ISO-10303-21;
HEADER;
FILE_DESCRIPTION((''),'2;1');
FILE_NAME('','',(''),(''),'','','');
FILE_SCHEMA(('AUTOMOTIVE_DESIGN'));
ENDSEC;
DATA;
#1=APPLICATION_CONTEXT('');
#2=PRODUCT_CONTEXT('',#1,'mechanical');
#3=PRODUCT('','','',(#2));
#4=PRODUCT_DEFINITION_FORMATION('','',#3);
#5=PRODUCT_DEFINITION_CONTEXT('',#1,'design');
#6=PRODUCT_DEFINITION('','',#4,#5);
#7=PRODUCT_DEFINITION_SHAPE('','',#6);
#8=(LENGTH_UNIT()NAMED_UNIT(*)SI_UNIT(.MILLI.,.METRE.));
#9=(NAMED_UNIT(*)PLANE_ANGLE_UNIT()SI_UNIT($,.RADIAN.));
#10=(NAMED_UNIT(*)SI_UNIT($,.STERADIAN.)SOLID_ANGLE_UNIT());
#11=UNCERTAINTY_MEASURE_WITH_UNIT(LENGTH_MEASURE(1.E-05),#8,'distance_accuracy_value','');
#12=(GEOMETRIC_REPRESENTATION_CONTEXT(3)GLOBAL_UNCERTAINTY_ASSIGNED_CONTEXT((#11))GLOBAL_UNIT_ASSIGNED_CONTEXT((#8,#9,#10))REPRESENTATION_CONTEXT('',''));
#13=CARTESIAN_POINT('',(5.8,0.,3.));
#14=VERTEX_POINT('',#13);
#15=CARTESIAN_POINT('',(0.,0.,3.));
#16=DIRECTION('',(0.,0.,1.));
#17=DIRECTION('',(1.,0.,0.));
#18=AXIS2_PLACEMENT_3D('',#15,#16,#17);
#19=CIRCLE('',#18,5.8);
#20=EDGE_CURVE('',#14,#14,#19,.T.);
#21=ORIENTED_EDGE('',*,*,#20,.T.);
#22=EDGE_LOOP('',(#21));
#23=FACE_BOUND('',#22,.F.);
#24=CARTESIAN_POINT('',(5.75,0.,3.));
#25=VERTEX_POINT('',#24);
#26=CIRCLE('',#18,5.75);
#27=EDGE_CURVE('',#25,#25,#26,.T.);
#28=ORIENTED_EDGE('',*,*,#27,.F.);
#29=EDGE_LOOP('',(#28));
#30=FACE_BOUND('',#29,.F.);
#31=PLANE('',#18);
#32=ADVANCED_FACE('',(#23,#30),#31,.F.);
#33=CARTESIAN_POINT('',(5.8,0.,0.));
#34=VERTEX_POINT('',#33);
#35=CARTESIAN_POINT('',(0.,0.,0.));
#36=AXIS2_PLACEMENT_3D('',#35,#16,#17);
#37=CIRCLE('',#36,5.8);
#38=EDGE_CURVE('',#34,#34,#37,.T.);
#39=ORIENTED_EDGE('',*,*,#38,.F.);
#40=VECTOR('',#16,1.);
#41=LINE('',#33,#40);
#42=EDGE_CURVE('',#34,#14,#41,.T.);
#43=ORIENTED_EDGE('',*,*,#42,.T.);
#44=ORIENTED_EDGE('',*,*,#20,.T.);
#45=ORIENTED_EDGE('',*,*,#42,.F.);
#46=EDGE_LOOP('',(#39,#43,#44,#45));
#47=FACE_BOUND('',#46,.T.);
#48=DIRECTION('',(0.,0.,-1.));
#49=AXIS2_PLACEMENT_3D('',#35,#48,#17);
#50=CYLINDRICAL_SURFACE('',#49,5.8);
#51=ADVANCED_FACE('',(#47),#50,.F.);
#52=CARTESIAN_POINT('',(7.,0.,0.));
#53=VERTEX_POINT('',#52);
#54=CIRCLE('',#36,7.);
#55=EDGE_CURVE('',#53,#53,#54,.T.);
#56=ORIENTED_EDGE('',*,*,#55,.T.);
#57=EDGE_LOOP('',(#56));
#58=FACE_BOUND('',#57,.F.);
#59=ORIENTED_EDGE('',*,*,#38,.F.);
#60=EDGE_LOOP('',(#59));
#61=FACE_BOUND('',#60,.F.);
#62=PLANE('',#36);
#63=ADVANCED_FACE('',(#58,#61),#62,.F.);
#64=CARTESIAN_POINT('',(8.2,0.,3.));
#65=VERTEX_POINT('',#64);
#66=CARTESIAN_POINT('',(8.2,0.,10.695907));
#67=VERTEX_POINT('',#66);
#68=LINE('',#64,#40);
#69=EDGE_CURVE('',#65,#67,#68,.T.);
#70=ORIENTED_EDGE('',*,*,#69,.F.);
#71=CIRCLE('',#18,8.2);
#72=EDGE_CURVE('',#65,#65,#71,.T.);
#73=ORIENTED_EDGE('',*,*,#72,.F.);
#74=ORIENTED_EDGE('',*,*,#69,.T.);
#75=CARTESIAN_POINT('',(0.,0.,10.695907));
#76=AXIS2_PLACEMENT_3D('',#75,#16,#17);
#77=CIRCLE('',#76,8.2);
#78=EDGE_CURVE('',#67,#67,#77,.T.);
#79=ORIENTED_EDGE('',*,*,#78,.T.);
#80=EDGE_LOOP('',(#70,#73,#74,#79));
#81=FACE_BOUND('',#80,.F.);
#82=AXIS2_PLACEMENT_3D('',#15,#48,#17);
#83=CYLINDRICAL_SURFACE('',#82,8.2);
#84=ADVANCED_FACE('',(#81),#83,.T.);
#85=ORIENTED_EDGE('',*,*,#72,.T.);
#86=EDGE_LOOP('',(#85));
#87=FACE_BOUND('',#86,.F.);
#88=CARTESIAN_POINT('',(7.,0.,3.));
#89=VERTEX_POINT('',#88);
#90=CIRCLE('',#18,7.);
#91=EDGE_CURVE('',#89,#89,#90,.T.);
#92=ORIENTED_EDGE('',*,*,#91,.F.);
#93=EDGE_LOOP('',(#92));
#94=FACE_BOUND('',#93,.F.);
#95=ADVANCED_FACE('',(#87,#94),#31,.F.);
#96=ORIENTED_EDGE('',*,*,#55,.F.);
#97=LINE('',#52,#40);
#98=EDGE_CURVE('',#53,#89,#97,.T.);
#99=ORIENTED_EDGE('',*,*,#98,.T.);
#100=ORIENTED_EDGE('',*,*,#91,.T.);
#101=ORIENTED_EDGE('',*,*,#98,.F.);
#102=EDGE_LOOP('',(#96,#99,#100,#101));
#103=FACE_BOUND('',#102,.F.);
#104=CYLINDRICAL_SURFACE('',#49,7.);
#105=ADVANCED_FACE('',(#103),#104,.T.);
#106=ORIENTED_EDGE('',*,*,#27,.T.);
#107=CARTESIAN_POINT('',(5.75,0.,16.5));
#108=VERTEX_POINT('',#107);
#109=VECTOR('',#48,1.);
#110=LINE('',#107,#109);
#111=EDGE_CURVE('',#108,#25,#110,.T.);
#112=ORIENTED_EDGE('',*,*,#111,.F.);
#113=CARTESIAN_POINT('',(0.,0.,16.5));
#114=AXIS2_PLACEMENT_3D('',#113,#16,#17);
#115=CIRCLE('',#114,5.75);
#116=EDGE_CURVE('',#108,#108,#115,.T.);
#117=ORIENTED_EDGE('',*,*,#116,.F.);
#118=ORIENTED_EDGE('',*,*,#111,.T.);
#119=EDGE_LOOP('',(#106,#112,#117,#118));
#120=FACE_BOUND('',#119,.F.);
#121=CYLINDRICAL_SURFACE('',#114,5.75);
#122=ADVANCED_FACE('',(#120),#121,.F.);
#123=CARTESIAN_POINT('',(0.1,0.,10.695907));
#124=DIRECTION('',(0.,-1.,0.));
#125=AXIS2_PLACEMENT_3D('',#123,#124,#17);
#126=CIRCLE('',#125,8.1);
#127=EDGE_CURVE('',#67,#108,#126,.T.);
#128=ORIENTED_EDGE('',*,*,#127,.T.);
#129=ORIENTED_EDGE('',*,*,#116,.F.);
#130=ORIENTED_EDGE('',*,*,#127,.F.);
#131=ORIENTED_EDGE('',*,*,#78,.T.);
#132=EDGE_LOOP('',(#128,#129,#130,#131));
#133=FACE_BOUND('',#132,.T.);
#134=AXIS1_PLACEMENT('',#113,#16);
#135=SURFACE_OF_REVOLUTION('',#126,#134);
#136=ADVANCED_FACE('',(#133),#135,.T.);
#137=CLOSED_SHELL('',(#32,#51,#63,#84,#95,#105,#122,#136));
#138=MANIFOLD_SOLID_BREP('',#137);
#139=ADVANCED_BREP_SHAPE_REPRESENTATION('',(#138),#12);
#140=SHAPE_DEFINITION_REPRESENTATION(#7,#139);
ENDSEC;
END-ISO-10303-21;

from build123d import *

# Parameters (mm, degrees)
F0_R     = 7
F0_R_2   = 5.8
F1_DEPTH = 3
F2_R     = 8.2
F3_DEPTH = 13.5
F4_R     = 5.75
F5_DEPTH = 16.501


# Not quite as in the source:
# - a fillet or chamfer that OpenCascade refuses, or shapes differently, is made with other operations: its cross-section is extruded or revolved along the edge and cut away or added


with BuildPart() as f1:
    # F0 (on Top) → F1 (new body)
    with BuildSketch(Plane.XY):
        Circle(F0_R)
        Circle(F0_R_2, mode=Mode.SUBTRACT)
    extrude(amount=F1_DEPTH)

    # F2 (on face) → F3 (join)
    with BuildSketch(Plane.XY.offset(3)):
        Circle(F2_R)
    extrude(amount=F3_DEPTH)

    # F4 (on face) → F5 (cut, through all)
    with BuildSketch(Plane.XY.offset(16.5)):
        Circle(F4_R)
    extrude(amount=-F5_DEPTH, mode=Mode.SUBTRACT)

    # F6: fillet of radius 8.1 on 1 edges, made by hand

    # F6_s1 → F6_t2 (revolve, cut)
    with BuildSketch(Plane.XZ):
        with BuildLine():
            ThreePointArc((8.2, 10.6959066169), (7.5624057783, 13.8459066169), (5.75, 16.5))
            Line((5.75, 16.5), (8.2, 16.5))
            Line((8.2, 16.5), (8.2, 10.6959066169))
        make_face()
    revolve(axis=Axis((0, 0, 16.5), (0, 0, 1)), mode=Mode.SUBTRACT)


solid = f1.part
